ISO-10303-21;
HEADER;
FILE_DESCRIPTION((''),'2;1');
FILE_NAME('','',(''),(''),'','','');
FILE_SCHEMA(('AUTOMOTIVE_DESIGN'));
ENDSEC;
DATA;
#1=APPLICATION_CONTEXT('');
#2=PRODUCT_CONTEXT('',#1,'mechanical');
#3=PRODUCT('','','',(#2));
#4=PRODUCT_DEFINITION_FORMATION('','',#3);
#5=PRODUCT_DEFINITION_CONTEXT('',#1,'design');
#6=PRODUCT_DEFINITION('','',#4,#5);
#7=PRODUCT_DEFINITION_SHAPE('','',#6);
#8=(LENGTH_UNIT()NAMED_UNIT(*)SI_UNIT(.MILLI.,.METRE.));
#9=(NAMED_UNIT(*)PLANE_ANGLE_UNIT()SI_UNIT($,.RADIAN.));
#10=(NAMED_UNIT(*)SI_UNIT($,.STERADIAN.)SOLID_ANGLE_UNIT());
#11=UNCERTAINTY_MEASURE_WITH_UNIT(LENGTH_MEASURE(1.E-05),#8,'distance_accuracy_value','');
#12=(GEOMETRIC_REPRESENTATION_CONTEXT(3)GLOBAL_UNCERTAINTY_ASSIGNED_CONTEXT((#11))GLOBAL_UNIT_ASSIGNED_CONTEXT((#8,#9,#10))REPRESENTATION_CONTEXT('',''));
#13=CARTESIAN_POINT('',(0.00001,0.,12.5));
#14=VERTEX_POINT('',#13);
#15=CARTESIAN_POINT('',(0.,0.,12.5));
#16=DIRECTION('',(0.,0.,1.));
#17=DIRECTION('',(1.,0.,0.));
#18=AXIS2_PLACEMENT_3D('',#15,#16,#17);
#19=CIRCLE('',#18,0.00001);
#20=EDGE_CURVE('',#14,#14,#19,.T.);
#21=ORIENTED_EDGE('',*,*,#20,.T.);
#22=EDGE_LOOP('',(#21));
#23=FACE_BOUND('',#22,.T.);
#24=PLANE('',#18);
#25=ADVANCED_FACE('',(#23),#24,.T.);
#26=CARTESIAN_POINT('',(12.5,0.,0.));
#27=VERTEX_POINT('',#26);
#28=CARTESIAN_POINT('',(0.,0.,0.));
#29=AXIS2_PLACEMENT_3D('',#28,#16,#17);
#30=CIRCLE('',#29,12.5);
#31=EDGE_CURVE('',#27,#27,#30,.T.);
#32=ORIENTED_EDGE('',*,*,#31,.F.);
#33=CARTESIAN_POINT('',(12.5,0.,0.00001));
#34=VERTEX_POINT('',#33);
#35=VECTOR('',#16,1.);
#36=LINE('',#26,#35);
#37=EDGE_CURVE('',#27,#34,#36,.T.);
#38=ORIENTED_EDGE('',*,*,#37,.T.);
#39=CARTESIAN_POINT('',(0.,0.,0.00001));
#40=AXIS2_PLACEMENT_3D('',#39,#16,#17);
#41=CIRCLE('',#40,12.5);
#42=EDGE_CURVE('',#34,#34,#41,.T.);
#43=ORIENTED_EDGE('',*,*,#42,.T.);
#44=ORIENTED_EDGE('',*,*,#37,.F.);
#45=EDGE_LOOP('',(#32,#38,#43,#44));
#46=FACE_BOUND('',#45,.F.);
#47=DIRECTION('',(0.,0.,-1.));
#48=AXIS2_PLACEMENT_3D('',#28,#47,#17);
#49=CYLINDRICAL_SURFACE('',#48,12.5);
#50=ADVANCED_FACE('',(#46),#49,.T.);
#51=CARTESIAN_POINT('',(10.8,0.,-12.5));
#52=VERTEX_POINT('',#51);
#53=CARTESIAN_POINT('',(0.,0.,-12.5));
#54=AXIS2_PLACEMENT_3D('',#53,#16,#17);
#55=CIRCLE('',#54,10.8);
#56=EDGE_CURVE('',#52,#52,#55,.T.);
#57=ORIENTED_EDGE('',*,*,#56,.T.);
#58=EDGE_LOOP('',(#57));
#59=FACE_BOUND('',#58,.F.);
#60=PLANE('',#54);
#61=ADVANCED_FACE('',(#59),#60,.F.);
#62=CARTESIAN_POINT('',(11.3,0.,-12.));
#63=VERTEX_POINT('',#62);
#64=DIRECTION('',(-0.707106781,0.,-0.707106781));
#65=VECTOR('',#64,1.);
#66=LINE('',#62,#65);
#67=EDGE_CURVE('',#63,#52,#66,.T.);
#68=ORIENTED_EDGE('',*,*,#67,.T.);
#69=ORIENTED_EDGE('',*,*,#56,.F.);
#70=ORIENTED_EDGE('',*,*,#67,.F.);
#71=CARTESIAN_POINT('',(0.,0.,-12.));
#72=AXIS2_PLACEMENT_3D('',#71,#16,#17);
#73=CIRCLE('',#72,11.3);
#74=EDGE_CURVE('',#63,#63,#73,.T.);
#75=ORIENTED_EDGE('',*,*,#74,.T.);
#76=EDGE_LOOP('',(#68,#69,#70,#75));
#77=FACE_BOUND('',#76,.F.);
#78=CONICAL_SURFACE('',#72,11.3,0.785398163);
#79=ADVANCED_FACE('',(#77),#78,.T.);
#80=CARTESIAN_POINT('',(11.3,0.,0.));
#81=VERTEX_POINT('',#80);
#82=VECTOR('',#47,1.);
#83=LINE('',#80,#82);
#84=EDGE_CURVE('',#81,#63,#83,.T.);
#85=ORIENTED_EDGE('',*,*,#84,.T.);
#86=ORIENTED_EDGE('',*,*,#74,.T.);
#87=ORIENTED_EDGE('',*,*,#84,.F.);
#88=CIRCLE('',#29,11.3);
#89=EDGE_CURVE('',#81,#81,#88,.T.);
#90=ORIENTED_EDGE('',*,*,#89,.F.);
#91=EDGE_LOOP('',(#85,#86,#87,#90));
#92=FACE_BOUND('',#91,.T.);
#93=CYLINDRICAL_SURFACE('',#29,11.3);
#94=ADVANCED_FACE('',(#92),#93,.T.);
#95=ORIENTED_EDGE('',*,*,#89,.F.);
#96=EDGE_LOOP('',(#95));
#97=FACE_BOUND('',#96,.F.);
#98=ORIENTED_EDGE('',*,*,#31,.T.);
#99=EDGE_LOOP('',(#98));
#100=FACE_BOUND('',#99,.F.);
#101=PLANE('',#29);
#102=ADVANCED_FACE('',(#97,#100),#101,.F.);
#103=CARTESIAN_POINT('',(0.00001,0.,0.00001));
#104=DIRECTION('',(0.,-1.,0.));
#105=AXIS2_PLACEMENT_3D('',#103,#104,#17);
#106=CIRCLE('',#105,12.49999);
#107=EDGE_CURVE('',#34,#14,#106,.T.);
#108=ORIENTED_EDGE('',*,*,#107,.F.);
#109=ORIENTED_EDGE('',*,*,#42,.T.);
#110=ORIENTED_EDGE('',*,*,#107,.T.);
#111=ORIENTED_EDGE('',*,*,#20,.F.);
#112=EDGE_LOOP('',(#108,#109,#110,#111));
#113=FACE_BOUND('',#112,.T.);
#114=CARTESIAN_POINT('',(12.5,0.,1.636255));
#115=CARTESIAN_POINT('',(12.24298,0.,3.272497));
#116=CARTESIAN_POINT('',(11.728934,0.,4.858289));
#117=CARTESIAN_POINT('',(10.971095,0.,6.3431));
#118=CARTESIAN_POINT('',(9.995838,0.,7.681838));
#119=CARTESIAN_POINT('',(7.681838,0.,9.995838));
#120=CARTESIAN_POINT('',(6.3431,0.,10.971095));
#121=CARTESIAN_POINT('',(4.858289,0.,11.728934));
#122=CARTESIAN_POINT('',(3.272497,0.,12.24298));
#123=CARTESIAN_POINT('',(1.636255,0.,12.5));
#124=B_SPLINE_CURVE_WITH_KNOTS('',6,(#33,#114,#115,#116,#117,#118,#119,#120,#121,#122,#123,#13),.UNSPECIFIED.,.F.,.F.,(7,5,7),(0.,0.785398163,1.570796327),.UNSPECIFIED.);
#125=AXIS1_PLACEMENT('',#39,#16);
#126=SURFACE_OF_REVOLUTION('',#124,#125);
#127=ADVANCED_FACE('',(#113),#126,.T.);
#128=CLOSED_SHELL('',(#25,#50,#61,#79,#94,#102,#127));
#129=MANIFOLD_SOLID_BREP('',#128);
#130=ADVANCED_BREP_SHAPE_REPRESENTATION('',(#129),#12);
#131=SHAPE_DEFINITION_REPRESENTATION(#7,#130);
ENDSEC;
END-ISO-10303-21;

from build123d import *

# Parameters (mm, degrees)
F0_R     = 12.5
F1_DEPTH = 12.5
F2_R     = 12.49999
F3_R     = 11.3
F4_DEPTH = 12.5
F5_SIZE  = 0.5


# Not quite as in the source:
# - a fillet or chamfer is up to 0.001 mm smaller than in the source, because OpenCascade refuses the exact size


with BuildPart() as f1:
    # F0 (on Top) → F1 (new body)
    with BuildSketch(Plane.XY):
        Circle(F0_R)
    extrude(amount=F1_DEPTH)

    # F2 (radius 12.5 in the source; OpenCascade refuses exactly that, so slightly less here)
    f2_edges = [f1.edges().sort_by_distance(p)[0] for p in [
        (-12.5, 0, 12.5),
    ]]
    fillet(f2_edges, radius=F2_R)

    # F3 (on Top) → F4 (join)
    with BuildSketch(Plane.XY):
        Circle(F3_R)
    extrude(amount=-F4_DEPTH)

    # F5
    f5_edges = [f1.edges().sort_by_distance(p)[0] for p in [
        (-11.3, 0, -12.5),
    ]]
    chamfer(f5_edges, length=F5_SIZE)


solid = f1.part
